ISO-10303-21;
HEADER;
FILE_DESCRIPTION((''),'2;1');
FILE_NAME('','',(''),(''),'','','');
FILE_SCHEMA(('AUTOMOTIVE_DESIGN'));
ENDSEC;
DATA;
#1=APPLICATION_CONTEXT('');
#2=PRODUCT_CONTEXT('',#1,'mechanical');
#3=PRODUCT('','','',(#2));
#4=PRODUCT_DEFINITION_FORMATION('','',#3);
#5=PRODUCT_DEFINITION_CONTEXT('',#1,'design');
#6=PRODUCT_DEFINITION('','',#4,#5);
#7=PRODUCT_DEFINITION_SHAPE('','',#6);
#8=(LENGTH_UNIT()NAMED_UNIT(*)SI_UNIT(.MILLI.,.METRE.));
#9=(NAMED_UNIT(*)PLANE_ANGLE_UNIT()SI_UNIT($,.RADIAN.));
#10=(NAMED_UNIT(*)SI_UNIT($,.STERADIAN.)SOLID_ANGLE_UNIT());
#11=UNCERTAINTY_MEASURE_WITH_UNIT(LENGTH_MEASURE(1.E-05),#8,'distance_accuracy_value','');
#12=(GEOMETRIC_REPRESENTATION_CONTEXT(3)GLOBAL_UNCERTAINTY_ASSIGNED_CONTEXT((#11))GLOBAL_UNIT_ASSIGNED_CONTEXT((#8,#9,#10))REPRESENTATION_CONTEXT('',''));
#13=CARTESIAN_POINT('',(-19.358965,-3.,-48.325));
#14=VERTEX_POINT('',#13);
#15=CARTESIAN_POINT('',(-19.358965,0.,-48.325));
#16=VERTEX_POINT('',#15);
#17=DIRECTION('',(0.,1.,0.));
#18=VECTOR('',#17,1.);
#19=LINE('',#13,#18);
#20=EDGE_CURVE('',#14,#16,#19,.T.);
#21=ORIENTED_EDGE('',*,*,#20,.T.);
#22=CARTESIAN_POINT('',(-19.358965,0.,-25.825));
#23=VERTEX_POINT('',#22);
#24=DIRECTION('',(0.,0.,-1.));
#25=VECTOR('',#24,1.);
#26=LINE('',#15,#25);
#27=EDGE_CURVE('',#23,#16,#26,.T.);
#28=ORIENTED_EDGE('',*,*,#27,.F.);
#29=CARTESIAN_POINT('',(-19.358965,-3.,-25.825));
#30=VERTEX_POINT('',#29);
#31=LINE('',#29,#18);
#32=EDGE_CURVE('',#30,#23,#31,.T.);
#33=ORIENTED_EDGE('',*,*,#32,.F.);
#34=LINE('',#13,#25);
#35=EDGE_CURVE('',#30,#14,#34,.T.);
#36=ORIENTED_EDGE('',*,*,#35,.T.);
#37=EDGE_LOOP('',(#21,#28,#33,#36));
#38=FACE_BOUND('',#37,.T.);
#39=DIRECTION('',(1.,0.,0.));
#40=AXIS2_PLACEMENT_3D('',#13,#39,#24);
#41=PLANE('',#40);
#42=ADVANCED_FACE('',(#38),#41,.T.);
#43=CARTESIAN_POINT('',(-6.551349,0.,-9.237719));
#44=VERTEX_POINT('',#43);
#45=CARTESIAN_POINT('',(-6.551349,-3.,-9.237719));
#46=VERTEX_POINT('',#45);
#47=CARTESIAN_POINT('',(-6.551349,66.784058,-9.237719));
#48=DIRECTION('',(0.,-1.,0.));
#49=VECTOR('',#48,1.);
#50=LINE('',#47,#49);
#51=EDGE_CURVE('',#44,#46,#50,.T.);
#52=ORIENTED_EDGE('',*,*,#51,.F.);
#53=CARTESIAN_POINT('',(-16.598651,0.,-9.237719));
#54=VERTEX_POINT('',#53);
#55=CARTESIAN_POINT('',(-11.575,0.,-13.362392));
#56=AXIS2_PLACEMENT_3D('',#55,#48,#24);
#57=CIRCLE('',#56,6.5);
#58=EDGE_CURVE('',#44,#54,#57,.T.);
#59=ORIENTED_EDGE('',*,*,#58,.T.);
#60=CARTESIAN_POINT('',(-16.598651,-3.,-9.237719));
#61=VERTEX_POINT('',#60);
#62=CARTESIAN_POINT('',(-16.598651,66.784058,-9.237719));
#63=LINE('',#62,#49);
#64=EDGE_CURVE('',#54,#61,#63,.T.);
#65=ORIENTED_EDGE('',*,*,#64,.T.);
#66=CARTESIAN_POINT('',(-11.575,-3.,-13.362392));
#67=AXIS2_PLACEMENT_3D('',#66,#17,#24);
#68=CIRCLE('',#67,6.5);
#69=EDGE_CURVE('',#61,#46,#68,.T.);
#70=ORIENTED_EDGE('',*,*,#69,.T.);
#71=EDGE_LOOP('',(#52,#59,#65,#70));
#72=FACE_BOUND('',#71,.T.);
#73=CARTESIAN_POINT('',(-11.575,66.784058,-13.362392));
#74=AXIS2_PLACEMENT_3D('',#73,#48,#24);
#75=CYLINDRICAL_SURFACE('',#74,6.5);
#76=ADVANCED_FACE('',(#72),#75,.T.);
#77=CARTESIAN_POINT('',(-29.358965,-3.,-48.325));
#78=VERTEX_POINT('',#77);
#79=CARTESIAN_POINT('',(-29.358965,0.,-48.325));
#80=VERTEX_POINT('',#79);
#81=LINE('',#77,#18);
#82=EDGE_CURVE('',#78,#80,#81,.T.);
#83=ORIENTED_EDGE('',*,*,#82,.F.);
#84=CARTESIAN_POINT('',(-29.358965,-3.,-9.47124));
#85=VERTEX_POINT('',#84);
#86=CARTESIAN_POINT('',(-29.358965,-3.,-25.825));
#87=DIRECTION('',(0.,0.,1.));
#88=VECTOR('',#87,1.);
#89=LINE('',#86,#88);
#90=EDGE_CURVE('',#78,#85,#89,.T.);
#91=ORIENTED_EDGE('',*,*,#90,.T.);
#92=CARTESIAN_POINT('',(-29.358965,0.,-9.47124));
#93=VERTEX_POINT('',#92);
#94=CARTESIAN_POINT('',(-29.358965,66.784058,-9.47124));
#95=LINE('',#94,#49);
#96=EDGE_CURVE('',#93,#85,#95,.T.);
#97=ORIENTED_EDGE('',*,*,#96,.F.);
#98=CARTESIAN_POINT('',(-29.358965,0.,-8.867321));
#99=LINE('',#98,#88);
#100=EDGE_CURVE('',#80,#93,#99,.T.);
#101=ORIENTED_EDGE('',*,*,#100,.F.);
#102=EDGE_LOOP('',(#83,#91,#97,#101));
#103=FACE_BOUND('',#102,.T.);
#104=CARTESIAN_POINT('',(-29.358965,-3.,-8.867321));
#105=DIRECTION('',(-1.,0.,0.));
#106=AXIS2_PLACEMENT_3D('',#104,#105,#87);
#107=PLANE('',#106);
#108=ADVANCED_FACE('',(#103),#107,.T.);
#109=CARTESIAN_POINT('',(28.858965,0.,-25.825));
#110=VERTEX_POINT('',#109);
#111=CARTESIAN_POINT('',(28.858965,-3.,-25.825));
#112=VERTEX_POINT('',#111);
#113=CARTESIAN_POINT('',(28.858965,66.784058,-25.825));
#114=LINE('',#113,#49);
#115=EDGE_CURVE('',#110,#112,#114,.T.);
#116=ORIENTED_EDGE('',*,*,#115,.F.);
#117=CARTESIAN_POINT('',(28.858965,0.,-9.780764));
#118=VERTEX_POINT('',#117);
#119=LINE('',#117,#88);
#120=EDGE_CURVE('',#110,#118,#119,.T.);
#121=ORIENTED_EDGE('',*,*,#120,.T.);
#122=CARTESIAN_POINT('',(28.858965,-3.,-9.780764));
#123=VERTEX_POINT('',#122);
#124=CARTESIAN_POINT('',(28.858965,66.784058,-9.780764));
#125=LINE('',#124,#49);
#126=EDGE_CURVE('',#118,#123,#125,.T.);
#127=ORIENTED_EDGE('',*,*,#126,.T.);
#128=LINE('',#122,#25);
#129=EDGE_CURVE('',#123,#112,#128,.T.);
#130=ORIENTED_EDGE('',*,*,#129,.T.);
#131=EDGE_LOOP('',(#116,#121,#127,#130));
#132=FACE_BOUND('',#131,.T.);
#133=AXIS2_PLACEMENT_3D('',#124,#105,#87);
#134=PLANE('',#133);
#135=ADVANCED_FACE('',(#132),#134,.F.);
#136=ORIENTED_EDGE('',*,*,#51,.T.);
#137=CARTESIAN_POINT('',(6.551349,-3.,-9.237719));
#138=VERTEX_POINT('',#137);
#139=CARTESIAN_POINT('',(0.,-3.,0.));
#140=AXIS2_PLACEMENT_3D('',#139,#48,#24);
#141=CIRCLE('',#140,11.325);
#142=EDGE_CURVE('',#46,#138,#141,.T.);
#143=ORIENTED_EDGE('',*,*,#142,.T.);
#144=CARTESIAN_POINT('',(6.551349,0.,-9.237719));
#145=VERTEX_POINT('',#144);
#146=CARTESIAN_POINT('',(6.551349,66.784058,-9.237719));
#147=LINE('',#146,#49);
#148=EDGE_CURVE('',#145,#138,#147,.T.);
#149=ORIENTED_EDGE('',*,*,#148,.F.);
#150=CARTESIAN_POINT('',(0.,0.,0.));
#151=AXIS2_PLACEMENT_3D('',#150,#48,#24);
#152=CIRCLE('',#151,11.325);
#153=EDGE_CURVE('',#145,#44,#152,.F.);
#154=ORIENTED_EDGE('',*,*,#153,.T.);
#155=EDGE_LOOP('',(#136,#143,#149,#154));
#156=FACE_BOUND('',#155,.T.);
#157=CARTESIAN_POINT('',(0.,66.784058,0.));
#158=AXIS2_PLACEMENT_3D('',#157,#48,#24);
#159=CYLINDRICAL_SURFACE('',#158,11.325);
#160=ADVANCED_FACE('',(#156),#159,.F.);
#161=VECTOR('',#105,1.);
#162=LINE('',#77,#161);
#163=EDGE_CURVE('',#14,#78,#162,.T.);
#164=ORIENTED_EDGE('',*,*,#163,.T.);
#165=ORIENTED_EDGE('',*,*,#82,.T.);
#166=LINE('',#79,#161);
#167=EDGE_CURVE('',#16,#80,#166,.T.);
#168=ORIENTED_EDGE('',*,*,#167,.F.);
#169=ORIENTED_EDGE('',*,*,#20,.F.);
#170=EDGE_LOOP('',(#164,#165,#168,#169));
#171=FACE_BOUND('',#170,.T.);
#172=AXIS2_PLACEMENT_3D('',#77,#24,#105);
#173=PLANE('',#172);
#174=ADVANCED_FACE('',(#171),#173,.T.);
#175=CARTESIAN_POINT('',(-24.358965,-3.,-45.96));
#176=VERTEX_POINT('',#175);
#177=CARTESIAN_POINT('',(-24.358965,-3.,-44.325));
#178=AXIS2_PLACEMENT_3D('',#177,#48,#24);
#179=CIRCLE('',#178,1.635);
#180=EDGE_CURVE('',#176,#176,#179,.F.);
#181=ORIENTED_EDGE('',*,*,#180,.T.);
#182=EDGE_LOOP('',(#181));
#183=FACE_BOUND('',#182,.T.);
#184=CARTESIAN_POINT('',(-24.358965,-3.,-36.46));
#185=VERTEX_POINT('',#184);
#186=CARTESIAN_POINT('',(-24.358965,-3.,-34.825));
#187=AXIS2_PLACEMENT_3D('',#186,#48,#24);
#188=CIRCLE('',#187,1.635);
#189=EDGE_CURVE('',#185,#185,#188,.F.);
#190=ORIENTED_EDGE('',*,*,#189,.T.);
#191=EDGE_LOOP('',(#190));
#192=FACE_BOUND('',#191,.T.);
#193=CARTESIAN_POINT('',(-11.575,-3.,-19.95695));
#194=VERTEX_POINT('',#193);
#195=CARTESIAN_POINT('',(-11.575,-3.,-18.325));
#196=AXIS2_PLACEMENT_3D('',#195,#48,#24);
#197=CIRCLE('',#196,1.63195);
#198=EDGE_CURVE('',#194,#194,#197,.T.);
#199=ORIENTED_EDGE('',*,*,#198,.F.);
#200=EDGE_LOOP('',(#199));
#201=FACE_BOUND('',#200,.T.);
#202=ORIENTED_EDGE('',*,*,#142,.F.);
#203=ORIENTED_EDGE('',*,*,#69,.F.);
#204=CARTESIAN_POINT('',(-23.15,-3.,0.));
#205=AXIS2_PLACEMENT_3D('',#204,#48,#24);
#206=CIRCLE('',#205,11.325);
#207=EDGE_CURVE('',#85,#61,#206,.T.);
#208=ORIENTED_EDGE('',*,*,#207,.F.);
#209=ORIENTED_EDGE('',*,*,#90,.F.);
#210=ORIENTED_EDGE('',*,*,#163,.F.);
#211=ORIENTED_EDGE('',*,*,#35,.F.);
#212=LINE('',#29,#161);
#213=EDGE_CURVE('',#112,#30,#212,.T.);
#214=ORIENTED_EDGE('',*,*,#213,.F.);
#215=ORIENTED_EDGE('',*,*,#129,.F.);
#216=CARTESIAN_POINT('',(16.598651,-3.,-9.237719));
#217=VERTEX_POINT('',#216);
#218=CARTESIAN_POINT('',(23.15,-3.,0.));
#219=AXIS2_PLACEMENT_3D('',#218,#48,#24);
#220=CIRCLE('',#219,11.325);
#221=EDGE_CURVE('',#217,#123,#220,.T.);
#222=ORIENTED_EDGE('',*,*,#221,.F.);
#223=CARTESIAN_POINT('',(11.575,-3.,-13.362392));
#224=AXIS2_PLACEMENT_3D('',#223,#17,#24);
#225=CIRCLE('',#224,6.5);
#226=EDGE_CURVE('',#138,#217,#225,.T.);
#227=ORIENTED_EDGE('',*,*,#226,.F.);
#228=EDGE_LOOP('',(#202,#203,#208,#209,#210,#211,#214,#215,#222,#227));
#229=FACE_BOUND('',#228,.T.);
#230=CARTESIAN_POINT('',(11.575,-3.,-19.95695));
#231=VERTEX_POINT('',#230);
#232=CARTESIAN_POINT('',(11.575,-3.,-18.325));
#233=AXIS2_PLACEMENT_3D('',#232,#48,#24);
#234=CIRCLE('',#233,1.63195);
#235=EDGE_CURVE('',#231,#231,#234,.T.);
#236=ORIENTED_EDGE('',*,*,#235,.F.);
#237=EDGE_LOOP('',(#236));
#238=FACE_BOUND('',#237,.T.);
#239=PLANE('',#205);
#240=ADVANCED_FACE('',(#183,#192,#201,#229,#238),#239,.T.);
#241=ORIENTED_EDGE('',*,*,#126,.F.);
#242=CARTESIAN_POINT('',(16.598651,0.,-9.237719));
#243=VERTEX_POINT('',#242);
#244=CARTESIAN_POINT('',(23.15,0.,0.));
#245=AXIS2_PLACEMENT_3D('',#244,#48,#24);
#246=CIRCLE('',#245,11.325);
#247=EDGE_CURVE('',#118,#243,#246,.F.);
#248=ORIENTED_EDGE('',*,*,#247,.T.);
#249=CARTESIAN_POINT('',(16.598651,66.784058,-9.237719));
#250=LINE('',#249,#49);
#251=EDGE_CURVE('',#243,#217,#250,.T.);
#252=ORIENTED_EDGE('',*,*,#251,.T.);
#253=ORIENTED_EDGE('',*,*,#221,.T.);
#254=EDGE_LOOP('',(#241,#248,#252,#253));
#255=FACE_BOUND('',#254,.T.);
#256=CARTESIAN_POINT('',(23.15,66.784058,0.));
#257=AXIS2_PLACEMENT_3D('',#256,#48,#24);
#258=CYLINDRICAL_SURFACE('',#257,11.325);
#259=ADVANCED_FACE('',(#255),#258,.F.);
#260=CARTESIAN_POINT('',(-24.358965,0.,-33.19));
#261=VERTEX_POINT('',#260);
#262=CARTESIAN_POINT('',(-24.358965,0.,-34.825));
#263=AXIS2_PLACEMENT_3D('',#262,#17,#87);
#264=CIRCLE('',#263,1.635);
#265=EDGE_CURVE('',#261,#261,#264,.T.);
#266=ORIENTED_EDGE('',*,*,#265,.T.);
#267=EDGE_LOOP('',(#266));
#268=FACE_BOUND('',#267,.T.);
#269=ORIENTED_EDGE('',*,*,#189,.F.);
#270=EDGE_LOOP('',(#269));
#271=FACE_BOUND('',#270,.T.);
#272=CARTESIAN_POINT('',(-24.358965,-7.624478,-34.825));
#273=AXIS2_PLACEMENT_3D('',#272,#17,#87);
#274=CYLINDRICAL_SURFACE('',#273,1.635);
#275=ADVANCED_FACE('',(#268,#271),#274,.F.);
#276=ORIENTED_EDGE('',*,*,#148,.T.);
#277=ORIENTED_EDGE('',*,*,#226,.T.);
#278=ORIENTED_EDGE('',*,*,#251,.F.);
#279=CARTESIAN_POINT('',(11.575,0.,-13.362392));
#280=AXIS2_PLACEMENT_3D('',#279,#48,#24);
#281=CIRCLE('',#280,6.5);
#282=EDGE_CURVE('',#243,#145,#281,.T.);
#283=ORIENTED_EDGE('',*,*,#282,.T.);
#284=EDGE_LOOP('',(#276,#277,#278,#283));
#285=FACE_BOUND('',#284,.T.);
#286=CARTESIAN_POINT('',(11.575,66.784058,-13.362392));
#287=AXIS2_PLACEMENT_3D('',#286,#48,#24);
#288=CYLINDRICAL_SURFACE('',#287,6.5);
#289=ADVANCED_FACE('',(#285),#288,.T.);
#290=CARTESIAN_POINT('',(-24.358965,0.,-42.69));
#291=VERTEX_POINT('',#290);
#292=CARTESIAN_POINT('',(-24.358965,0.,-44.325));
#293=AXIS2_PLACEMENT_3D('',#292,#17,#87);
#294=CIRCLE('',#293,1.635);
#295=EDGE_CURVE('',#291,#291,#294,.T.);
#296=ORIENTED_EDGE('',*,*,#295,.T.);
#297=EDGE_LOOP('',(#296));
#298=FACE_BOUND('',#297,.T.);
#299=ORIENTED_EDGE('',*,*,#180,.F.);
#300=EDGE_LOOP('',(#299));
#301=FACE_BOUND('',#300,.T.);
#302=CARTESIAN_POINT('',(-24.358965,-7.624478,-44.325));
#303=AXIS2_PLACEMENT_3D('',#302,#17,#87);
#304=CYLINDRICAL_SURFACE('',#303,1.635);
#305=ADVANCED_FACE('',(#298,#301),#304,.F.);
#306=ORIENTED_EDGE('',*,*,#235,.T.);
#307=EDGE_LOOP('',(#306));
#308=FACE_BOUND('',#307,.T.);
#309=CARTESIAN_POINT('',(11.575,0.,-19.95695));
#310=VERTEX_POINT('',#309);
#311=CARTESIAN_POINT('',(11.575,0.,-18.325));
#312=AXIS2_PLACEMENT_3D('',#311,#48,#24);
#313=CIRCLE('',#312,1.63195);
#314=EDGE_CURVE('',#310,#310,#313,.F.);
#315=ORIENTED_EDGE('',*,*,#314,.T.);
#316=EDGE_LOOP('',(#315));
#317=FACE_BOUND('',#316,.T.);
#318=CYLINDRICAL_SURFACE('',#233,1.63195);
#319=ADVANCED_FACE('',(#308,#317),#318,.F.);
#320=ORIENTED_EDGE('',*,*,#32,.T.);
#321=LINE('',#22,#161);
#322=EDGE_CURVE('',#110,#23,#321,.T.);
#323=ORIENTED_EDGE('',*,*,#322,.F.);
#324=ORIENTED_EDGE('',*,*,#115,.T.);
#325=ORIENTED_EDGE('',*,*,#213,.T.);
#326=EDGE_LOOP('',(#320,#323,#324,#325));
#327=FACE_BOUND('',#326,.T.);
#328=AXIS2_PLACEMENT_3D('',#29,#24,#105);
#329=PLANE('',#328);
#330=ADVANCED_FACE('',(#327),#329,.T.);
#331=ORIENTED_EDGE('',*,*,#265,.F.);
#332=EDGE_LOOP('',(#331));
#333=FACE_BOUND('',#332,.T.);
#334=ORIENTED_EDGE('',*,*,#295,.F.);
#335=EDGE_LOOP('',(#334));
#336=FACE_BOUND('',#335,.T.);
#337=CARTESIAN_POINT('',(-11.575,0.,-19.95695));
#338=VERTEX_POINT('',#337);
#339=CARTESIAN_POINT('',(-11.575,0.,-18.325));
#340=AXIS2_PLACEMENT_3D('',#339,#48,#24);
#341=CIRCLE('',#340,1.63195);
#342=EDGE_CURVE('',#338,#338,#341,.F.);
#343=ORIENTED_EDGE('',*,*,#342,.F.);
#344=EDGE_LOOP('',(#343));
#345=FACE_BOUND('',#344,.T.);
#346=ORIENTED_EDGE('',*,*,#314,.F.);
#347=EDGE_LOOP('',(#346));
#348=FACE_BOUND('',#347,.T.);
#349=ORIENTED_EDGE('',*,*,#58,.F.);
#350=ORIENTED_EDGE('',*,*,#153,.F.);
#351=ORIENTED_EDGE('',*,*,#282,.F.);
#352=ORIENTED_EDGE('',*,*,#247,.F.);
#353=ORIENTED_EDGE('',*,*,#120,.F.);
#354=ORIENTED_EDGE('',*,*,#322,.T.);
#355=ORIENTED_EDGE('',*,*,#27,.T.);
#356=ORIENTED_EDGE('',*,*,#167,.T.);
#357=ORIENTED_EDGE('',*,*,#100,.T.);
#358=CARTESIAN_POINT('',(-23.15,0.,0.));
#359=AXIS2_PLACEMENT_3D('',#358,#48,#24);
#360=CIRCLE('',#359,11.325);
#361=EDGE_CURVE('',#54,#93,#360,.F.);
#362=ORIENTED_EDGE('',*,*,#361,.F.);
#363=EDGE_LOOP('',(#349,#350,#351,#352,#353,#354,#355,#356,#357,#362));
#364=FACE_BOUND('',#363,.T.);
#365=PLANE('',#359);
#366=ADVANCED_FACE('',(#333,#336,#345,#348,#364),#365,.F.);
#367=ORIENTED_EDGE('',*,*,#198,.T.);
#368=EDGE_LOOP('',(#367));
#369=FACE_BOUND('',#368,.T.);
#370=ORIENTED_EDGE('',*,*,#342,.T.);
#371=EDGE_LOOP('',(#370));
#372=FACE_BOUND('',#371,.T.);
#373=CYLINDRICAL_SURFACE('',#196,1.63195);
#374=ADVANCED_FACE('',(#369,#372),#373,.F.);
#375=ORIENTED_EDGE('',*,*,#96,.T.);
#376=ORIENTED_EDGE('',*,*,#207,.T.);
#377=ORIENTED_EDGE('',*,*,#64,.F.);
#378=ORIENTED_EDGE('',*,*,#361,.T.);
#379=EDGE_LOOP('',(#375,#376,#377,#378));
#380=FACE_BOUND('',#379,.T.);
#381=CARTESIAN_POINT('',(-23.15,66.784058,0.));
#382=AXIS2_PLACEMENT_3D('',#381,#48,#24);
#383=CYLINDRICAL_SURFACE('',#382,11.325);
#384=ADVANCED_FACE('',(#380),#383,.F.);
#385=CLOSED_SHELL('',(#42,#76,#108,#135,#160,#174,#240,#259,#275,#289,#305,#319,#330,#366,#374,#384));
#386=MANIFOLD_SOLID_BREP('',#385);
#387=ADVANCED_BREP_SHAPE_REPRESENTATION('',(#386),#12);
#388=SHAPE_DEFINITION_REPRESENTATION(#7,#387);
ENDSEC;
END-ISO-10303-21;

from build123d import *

# Parameters (mm, degrees)
BASE_FLANGE1_DEPTH        = 3
SKETCH8_R                 = 1.635
CUT_EXTRUDE1_DEPTH        = 3
F_4_CLEARANCE_HOLE2_D     = 3.2639
F_4_CLEARANCE_HOLE2_DEPTH = 3
F_4_CLEARANCE_HOLE2_TIP   = 0.980574487
CUT_EXTRUDE2_DEPTH        = 3


# Sheet-metal steps are written as plain solids
with BuildPart() as part:
    # Sketch3 → Base-Flange1 (new body)
    with BuildSketch(Plane(origin=(0, 0, 0), x_dir=(1, 0, 0), z_dir=(0, 1, 0))):
        with BuildLine():
            Line((-29.358964924, 8.867320879), (-29.358964924, 25.825))
            Line((-29.358964924, 25.825), (-29.358964924, 48.325))
            Line((-29.358964924, 48.325), (-19.358964924, 48.325))
            Line((-19.358964924, 48.325), (-19.358964924, 25.825))
            Line((-19.358964924, 25.825), (29.358964924, 25.825))
            Line((29.358964924, 25.825), (29.358964924, 8.867320879))
            ThreePointArc((29.358964924, 8.867320879), (23.15, 10.825), (16.941035076, 8.867320879))
            ThreePointArc((16.941035076, 8.867320879), (11.575, 6.362392354), (6.208964924, 8.867320879))
            ThreePointArc((6.208964924, 8.867320879), (0, 10.825), (-6.208964924, 8.867320879))
            ThreePointArc((-6.208964924, 8.867320879), (-11.575, 6.362392354), (-16.941035076, 8.867320879))
            ThreePointArc((-16.941035076, 8.867320879), (-23.15, 10.825), (-29.358964924, 8.867320879))
        make_face()
    extrude(amount=-BASE_FLANGE1_DEPTH)

    # Sketch8 → Cut-Extrude1 (cut)
    with BuildSketch(Plane(origin=(0, 0, 0), x_dir=(1, 0, 0), z_dir=(0, 1, 0))):
        with Locations(Location((-24.358964924, 44.325, 0), (0, 0, 270))):
            Circle(SKETCH8_R)
        with Locations(Location((-24.358964924, 34.825, 0), (0, 0, 270))):
            Circle(SKETCH8_R)
    extrude(amount=-CUT_EXTRUDE1_DEPTH, mode=Mode.SUBTRACT)

    # #4 Clearance Hole2
    with Locations(Plane.XZ.offset(3)):
        with Locations((11.575, -18.325), (-11.575, -18.325)):
            Hole(F_4_CLEARANCE_HOLE2_D / 2, depth=F_4_CLEARANCE_HOLE2_DEPTH)
            with Locations((0, 0, -(F_4_CLEARANCE_HOLE2_DEPTH + F_4_CLEARANCE_HOLE2_TIP / 2))):  # 118° drill point
                Cone(0, F_4_CLEARANCE_HOLE2_D / 2, F_4_CLEARANCE_HOLE2_TIP, mode=Mode.SUBTRACT)

    # Sketch11 → Cut-Extrude2 (cut)
    with BuildSketch(Plane.XZ.offset(3)):
        with BuildLine():
            Line((-29.645753142, -9.276896902), (-29.645753142, -3.891418545))
            Line((-29.645753142, -3.891418545), (33.433786827, -3.891418545))
            Line((33.433786827, -3.891418545), (33.433786827, -25.825))
            Line((33.433786827, -25.825), (28.858964924, -25.825))
            Line((28.858964924, -25.825), (28.858964924, -9.780764004))
            ThreePointArc((28.858964924, -9.780764004), (22.648874034, -11.313907272), (16.598650974, -9.237718925))
            ThreePointArc((16.598650974, -9.237718925), (11.575, -6.862392354), (6.551349026, -9.237718925))
            ThreePointArc((6.551349026, -9.237718925), (0, -11.325), (-6.551349026, -9.237718925))
            ThreePointArc((-6.551349026, -9.237718925), (-11.575, -6.862392354), (-16.598650974, -9.237718925))
            ThreePointArc((-16.598650974, -9.237718925), (-23.115993323, -11.324948942), (-29.645753142, -9.276896902))
        make_face()
    extrude(amount=-CUT_EXTRUDE2_DEPTH, mode=Mode.SUBTRACT)


solid = part.part
